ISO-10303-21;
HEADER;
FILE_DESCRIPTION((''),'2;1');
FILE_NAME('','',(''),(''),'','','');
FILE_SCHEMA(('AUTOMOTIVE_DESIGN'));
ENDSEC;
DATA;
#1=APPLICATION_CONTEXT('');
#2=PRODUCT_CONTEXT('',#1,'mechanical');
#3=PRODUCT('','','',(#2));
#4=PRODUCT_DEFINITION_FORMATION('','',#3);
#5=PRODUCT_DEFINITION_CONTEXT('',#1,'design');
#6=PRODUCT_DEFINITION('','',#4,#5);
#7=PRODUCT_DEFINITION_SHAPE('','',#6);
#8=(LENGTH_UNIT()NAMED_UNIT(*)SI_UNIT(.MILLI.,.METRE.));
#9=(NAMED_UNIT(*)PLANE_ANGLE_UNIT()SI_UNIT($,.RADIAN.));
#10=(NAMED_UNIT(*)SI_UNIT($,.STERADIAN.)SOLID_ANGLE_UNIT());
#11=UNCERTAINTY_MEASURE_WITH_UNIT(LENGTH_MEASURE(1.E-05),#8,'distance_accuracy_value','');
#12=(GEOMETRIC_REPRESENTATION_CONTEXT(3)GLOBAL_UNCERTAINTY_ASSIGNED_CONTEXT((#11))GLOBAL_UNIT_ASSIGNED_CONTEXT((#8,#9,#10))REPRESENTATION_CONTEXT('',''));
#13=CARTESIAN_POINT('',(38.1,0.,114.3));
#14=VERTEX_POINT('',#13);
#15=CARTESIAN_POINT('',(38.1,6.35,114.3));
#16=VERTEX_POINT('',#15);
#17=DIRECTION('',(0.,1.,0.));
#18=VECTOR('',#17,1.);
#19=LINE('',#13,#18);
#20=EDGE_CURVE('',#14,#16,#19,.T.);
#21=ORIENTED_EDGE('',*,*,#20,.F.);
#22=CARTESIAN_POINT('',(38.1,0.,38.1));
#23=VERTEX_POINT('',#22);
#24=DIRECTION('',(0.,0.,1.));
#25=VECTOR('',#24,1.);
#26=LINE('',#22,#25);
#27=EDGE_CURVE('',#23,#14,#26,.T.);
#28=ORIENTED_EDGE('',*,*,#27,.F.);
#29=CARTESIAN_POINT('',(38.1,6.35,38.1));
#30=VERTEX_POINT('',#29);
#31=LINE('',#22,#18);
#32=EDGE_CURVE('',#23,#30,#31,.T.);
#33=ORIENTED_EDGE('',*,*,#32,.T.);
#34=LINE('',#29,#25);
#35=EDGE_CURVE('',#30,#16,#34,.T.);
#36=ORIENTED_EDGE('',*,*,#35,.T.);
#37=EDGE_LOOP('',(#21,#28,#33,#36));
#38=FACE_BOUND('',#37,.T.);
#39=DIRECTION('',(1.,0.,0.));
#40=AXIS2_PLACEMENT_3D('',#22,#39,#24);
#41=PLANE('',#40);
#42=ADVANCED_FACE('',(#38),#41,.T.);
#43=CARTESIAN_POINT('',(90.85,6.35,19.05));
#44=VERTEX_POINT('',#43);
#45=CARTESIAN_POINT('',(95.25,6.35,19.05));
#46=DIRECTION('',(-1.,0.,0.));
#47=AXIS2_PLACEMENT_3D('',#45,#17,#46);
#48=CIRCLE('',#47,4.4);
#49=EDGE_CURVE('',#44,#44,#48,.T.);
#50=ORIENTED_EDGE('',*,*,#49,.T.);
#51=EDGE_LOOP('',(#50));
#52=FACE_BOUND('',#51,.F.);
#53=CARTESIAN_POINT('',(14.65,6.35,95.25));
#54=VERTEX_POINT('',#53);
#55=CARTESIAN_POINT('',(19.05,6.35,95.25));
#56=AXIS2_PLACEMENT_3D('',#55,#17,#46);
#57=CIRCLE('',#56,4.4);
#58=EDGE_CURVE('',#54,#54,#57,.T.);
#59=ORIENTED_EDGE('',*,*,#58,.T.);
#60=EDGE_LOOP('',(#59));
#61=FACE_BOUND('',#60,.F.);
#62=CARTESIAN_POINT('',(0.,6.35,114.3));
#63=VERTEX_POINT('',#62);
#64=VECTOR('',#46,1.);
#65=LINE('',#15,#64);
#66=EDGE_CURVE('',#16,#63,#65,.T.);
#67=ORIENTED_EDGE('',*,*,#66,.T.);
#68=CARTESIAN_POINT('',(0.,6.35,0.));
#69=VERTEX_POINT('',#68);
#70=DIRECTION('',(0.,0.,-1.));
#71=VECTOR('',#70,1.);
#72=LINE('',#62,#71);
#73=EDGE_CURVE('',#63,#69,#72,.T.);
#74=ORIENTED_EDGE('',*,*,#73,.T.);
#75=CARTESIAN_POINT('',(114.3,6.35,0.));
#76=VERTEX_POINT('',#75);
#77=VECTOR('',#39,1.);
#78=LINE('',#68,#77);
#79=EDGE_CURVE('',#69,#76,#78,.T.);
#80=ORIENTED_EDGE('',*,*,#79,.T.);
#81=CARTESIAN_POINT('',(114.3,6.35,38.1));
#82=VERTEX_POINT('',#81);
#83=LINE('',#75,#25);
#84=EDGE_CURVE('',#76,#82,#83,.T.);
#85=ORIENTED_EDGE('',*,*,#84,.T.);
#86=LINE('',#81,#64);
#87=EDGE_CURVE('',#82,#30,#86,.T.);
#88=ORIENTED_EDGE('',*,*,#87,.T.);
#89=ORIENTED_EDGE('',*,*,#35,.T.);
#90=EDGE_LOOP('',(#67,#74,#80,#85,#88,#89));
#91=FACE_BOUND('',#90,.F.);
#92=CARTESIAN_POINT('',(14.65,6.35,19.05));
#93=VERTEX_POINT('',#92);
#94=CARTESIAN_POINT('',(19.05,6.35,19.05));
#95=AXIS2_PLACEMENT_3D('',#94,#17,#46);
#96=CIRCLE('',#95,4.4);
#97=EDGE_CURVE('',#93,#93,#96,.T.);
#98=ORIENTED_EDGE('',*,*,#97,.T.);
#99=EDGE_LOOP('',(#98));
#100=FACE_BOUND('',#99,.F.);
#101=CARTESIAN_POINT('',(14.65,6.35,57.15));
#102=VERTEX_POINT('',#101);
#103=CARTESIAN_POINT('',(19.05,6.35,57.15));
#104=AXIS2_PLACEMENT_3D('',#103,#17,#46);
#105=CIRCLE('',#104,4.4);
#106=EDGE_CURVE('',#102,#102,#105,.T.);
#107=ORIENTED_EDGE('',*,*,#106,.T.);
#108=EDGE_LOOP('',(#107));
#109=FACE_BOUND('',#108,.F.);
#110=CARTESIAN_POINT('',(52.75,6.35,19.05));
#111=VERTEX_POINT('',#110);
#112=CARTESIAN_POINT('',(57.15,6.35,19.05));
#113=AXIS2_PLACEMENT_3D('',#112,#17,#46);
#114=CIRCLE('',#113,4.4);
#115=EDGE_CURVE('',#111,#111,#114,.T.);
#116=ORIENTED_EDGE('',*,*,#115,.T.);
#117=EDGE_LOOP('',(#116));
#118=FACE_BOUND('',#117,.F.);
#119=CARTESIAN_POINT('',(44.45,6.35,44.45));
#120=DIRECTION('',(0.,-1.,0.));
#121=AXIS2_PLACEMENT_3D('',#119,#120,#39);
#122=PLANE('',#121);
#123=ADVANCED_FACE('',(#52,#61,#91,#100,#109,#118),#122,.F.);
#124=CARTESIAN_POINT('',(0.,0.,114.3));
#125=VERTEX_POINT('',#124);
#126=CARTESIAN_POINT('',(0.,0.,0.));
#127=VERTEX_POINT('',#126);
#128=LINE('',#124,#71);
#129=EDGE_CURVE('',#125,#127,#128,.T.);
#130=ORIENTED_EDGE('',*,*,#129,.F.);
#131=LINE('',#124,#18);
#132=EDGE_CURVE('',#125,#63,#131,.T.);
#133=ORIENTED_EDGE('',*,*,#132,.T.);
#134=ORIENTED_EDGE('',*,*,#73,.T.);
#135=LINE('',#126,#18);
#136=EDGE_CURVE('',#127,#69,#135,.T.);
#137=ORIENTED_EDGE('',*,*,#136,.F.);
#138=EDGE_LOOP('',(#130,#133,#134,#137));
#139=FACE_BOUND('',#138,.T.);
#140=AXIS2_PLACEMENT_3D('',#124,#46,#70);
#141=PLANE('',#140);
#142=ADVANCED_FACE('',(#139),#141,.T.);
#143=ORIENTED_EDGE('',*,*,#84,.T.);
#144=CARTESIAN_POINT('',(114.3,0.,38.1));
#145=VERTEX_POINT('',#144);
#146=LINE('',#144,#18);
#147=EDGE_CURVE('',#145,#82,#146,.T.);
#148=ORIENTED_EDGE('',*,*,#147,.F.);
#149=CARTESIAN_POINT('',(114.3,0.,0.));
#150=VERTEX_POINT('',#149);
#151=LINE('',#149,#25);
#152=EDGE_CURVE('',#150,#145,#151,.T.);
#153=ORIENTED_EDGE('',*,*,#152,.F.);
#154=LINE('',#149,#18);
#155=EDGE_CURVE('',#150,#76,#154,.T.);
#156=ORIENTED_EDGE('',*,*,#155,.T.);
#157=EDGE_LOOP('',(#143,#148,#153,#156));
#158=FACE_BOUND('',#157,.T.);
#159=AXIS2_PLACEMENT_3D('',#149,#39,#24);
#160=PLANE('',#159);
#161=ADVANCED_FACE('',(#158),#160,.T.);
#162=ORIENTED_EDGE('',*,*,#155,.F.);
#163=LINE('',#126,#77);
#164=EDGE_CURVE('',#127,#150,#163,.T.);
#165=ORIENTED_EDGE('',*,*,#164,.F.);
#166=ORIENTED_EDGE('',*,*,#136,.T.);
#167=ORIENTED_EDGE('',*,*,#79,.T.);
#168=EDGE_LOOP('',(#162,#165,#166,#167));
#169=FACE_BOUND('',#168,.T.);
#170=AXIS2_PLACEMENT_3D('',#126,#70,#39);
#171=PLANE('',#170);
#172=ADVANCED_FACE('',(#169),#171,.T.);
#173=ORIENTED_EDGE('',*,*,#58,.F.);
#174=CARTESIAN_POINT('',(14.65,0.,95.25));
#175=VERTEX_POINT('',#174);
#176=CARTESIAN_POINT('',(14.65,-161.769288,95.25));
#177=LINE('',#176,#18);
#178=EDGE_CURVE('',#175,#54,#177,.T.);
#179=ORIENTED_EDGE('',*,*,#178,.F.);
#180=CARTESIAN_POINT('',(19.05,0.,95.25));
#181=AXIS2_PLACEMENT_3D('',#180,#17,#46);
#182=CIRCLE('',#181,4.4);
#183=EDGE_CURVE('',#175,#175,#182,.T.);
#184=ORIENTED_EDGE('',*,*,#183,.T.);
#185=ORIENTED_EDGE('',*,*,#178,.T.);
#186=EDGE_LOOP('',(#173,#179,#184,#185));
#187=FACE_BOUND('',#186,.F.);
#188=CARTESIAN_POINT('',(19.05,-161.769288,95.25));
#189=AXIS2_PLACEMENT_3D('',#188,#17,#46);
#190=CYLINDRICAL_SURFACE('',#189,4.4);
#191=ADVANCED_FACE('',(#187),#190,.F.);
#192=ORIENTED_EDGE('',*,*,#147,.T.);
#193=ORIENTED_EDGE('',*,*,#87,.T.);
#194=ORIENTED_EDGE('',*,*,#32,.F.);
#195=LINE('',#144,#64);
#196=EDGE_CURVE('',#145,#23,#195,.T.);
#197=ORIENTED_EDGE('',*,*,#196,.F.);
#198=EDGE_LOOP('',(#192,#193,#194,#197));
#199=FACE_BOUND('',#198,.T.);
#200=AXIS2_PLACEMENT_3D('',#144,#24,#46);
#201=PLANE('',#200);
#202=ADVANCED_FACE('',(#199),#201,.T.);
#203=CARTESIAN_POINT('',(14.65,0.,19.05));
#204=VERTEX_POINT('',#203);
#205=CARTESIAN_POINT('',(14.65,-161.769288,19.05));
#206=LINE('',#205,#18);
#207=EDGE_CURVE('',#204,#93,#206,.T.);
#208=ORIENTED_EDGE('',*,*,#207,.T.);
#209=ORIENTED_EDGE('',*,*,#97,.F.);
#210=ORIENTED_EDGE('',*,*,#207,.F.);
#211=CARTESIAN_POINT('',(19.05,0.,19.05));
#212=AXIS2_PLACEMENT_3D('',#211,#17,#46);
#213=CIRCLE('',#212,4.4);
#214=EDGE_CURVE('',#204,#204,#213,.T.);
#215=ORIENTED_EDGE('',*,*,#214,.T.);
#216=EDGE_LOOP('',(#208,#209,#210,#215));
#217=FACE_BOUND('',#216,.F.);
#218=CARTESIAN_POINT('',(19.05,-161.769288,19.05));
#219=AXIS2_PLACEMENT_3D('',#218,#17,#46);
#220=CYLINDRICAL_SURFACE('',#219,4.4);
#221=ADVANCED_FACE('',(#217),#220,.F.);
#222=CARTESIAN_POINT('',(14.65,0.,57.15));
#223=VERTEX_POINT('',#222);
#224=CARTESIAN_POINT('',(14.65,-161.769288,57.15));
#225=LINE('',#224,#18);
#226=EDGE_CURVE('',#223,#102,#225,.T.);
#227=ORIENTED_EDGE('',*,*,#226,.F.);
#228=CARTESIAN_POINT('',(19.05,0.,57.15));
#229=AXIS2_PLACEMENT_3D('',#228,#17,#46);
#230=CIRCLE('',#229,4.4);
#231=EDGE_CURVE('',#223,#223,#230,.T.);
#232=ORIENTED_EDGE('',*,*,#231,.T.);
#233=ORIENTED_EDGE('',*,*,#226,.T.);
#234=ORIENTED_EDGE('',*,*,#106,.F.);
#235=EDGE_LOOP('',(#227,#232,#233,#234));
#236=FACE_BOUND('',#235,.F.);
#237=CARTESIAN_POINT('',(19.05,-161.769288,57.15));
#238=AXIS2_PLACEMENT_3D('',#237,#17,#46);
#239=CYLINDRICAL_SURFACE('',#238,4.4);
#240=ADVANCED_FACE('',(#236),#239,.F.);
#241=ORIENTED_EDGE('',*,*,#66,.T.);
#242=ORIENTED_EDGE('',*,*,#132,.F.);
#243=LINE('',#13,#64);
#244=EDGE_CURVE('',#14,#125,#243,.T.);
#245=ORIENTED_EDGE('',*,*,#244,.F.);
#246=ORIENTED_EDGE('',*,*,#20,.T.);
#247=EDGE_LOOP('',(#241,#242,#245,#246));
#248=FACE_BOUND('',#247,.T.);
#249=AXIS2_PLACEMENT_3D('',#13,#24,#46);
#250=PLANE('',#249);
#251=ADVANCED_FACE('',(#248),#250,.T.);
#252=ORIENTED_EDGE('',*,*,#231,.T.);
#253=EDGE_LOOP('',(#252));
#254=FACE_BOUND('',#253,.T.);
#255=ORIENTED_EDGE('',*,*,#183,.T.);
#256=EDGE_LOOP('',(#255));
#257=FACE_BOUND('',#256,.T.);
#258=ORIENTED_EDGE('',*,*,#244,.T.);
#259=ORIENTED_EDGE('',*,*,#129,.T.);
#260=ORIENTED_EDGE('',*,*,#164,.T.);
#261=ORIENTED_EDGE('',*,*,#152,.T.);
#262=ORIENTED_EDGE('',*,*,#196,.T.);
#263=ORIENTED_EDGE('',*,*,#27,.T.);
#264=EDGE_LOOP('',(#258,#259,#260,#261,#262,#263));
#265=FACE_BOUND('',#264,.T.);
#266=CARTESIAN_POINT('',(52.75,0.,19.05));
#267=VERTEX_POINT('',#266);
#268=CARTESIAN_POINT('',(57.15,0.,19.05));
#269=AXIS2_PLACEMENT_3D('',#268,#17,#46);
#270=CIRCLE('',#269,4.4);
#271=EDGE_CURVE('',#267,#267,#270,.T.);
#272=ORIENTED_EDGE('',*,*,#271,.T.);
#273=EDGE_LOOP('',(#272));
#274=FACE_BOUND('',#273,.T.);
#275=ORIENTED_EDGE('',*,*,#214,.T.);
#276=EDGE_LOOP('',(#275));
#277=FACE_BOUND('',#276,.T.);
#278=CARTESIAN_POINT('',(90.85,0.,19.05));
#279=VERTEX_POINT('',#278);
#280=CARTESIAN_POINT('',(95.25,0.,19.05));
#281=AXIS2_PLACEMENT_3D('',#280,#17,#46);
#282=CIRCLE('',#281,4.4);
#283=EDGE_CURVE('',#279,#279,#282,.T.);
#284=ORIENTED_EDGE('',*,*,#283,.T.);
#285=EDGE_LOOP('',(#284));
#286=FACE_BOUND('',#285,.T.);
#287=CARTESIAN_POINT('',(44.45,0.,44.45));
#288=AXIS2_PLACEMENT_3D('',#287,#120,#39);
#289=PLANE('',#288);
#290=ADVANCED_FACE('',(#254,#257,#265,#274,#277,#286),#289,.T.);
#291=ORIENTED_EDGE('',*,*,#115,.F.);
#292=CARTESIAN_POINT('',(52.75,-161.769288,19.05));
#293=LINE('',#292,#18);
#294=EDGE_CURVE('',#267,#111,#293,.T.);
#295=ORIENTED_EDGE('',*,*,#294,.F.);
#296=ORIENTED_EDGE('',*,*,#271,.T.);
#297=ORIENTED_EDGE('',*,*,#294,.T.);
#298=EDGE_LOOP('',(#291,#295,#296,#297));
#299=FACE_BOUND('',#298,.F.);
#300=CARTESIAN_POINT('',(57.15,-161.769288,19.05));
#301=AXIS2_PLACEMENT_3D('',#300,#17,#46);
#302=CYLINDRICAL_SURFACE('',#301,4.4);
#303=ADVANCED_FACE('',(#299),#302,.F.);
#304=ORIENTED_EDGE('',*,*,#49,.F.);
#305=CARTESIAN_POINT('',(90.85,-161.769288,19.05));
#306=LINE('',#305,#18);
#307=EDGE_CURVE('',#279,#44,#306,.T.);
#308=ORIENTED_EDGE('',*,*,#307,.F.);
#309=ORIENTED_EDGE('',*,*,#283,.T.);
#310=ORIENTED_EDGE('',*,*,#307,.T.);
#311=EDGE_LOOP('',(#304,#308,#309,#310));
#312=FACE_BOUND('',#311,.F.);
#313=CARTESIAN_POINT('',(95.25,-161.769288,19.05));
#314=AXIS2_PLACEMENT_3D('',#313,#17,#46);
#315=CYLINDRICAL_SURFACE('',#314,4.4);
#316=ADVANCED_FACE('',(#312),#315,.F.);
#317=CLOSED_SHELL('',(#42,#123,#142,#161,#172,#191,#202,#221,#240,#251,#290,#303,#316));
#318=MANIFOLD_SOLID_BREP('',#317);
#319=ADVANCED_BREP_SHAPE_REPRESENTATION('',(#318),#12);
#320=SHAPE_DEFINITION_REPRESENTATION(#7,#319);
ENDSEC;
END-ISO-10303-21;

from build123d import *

# Parameters (mm, degrees)
F1_DEPTH = 6.35
F2_D     = 8.8


# Not quite as in the source:
# - a length typed as a fraction of an inch, garbled in the dataset ("3 / 203.2 mm" for 3/8 in), is restored


with BuildPart() as f1:
    # F0 (on Front) → F1 (new body)
    with BuildSketch(Plane.XZ):
        Polygon((0, 114.3), (0, 0), (114.3, 0), (114.3, 38.1), (38.1, 38.1), (38.1, 114.3), align=None)
    extrude(amount=-F1_DEPTH)

    # F2 (through all)
    with Locations(Plane.XZ):
        with Locations((19.05, 95.25), (19.05, 57.15), (19.05, 19.05), (57.15, 19.05), (95.25, 19.05)):
            Hole(F2_D / 2)


solid = f1.part
